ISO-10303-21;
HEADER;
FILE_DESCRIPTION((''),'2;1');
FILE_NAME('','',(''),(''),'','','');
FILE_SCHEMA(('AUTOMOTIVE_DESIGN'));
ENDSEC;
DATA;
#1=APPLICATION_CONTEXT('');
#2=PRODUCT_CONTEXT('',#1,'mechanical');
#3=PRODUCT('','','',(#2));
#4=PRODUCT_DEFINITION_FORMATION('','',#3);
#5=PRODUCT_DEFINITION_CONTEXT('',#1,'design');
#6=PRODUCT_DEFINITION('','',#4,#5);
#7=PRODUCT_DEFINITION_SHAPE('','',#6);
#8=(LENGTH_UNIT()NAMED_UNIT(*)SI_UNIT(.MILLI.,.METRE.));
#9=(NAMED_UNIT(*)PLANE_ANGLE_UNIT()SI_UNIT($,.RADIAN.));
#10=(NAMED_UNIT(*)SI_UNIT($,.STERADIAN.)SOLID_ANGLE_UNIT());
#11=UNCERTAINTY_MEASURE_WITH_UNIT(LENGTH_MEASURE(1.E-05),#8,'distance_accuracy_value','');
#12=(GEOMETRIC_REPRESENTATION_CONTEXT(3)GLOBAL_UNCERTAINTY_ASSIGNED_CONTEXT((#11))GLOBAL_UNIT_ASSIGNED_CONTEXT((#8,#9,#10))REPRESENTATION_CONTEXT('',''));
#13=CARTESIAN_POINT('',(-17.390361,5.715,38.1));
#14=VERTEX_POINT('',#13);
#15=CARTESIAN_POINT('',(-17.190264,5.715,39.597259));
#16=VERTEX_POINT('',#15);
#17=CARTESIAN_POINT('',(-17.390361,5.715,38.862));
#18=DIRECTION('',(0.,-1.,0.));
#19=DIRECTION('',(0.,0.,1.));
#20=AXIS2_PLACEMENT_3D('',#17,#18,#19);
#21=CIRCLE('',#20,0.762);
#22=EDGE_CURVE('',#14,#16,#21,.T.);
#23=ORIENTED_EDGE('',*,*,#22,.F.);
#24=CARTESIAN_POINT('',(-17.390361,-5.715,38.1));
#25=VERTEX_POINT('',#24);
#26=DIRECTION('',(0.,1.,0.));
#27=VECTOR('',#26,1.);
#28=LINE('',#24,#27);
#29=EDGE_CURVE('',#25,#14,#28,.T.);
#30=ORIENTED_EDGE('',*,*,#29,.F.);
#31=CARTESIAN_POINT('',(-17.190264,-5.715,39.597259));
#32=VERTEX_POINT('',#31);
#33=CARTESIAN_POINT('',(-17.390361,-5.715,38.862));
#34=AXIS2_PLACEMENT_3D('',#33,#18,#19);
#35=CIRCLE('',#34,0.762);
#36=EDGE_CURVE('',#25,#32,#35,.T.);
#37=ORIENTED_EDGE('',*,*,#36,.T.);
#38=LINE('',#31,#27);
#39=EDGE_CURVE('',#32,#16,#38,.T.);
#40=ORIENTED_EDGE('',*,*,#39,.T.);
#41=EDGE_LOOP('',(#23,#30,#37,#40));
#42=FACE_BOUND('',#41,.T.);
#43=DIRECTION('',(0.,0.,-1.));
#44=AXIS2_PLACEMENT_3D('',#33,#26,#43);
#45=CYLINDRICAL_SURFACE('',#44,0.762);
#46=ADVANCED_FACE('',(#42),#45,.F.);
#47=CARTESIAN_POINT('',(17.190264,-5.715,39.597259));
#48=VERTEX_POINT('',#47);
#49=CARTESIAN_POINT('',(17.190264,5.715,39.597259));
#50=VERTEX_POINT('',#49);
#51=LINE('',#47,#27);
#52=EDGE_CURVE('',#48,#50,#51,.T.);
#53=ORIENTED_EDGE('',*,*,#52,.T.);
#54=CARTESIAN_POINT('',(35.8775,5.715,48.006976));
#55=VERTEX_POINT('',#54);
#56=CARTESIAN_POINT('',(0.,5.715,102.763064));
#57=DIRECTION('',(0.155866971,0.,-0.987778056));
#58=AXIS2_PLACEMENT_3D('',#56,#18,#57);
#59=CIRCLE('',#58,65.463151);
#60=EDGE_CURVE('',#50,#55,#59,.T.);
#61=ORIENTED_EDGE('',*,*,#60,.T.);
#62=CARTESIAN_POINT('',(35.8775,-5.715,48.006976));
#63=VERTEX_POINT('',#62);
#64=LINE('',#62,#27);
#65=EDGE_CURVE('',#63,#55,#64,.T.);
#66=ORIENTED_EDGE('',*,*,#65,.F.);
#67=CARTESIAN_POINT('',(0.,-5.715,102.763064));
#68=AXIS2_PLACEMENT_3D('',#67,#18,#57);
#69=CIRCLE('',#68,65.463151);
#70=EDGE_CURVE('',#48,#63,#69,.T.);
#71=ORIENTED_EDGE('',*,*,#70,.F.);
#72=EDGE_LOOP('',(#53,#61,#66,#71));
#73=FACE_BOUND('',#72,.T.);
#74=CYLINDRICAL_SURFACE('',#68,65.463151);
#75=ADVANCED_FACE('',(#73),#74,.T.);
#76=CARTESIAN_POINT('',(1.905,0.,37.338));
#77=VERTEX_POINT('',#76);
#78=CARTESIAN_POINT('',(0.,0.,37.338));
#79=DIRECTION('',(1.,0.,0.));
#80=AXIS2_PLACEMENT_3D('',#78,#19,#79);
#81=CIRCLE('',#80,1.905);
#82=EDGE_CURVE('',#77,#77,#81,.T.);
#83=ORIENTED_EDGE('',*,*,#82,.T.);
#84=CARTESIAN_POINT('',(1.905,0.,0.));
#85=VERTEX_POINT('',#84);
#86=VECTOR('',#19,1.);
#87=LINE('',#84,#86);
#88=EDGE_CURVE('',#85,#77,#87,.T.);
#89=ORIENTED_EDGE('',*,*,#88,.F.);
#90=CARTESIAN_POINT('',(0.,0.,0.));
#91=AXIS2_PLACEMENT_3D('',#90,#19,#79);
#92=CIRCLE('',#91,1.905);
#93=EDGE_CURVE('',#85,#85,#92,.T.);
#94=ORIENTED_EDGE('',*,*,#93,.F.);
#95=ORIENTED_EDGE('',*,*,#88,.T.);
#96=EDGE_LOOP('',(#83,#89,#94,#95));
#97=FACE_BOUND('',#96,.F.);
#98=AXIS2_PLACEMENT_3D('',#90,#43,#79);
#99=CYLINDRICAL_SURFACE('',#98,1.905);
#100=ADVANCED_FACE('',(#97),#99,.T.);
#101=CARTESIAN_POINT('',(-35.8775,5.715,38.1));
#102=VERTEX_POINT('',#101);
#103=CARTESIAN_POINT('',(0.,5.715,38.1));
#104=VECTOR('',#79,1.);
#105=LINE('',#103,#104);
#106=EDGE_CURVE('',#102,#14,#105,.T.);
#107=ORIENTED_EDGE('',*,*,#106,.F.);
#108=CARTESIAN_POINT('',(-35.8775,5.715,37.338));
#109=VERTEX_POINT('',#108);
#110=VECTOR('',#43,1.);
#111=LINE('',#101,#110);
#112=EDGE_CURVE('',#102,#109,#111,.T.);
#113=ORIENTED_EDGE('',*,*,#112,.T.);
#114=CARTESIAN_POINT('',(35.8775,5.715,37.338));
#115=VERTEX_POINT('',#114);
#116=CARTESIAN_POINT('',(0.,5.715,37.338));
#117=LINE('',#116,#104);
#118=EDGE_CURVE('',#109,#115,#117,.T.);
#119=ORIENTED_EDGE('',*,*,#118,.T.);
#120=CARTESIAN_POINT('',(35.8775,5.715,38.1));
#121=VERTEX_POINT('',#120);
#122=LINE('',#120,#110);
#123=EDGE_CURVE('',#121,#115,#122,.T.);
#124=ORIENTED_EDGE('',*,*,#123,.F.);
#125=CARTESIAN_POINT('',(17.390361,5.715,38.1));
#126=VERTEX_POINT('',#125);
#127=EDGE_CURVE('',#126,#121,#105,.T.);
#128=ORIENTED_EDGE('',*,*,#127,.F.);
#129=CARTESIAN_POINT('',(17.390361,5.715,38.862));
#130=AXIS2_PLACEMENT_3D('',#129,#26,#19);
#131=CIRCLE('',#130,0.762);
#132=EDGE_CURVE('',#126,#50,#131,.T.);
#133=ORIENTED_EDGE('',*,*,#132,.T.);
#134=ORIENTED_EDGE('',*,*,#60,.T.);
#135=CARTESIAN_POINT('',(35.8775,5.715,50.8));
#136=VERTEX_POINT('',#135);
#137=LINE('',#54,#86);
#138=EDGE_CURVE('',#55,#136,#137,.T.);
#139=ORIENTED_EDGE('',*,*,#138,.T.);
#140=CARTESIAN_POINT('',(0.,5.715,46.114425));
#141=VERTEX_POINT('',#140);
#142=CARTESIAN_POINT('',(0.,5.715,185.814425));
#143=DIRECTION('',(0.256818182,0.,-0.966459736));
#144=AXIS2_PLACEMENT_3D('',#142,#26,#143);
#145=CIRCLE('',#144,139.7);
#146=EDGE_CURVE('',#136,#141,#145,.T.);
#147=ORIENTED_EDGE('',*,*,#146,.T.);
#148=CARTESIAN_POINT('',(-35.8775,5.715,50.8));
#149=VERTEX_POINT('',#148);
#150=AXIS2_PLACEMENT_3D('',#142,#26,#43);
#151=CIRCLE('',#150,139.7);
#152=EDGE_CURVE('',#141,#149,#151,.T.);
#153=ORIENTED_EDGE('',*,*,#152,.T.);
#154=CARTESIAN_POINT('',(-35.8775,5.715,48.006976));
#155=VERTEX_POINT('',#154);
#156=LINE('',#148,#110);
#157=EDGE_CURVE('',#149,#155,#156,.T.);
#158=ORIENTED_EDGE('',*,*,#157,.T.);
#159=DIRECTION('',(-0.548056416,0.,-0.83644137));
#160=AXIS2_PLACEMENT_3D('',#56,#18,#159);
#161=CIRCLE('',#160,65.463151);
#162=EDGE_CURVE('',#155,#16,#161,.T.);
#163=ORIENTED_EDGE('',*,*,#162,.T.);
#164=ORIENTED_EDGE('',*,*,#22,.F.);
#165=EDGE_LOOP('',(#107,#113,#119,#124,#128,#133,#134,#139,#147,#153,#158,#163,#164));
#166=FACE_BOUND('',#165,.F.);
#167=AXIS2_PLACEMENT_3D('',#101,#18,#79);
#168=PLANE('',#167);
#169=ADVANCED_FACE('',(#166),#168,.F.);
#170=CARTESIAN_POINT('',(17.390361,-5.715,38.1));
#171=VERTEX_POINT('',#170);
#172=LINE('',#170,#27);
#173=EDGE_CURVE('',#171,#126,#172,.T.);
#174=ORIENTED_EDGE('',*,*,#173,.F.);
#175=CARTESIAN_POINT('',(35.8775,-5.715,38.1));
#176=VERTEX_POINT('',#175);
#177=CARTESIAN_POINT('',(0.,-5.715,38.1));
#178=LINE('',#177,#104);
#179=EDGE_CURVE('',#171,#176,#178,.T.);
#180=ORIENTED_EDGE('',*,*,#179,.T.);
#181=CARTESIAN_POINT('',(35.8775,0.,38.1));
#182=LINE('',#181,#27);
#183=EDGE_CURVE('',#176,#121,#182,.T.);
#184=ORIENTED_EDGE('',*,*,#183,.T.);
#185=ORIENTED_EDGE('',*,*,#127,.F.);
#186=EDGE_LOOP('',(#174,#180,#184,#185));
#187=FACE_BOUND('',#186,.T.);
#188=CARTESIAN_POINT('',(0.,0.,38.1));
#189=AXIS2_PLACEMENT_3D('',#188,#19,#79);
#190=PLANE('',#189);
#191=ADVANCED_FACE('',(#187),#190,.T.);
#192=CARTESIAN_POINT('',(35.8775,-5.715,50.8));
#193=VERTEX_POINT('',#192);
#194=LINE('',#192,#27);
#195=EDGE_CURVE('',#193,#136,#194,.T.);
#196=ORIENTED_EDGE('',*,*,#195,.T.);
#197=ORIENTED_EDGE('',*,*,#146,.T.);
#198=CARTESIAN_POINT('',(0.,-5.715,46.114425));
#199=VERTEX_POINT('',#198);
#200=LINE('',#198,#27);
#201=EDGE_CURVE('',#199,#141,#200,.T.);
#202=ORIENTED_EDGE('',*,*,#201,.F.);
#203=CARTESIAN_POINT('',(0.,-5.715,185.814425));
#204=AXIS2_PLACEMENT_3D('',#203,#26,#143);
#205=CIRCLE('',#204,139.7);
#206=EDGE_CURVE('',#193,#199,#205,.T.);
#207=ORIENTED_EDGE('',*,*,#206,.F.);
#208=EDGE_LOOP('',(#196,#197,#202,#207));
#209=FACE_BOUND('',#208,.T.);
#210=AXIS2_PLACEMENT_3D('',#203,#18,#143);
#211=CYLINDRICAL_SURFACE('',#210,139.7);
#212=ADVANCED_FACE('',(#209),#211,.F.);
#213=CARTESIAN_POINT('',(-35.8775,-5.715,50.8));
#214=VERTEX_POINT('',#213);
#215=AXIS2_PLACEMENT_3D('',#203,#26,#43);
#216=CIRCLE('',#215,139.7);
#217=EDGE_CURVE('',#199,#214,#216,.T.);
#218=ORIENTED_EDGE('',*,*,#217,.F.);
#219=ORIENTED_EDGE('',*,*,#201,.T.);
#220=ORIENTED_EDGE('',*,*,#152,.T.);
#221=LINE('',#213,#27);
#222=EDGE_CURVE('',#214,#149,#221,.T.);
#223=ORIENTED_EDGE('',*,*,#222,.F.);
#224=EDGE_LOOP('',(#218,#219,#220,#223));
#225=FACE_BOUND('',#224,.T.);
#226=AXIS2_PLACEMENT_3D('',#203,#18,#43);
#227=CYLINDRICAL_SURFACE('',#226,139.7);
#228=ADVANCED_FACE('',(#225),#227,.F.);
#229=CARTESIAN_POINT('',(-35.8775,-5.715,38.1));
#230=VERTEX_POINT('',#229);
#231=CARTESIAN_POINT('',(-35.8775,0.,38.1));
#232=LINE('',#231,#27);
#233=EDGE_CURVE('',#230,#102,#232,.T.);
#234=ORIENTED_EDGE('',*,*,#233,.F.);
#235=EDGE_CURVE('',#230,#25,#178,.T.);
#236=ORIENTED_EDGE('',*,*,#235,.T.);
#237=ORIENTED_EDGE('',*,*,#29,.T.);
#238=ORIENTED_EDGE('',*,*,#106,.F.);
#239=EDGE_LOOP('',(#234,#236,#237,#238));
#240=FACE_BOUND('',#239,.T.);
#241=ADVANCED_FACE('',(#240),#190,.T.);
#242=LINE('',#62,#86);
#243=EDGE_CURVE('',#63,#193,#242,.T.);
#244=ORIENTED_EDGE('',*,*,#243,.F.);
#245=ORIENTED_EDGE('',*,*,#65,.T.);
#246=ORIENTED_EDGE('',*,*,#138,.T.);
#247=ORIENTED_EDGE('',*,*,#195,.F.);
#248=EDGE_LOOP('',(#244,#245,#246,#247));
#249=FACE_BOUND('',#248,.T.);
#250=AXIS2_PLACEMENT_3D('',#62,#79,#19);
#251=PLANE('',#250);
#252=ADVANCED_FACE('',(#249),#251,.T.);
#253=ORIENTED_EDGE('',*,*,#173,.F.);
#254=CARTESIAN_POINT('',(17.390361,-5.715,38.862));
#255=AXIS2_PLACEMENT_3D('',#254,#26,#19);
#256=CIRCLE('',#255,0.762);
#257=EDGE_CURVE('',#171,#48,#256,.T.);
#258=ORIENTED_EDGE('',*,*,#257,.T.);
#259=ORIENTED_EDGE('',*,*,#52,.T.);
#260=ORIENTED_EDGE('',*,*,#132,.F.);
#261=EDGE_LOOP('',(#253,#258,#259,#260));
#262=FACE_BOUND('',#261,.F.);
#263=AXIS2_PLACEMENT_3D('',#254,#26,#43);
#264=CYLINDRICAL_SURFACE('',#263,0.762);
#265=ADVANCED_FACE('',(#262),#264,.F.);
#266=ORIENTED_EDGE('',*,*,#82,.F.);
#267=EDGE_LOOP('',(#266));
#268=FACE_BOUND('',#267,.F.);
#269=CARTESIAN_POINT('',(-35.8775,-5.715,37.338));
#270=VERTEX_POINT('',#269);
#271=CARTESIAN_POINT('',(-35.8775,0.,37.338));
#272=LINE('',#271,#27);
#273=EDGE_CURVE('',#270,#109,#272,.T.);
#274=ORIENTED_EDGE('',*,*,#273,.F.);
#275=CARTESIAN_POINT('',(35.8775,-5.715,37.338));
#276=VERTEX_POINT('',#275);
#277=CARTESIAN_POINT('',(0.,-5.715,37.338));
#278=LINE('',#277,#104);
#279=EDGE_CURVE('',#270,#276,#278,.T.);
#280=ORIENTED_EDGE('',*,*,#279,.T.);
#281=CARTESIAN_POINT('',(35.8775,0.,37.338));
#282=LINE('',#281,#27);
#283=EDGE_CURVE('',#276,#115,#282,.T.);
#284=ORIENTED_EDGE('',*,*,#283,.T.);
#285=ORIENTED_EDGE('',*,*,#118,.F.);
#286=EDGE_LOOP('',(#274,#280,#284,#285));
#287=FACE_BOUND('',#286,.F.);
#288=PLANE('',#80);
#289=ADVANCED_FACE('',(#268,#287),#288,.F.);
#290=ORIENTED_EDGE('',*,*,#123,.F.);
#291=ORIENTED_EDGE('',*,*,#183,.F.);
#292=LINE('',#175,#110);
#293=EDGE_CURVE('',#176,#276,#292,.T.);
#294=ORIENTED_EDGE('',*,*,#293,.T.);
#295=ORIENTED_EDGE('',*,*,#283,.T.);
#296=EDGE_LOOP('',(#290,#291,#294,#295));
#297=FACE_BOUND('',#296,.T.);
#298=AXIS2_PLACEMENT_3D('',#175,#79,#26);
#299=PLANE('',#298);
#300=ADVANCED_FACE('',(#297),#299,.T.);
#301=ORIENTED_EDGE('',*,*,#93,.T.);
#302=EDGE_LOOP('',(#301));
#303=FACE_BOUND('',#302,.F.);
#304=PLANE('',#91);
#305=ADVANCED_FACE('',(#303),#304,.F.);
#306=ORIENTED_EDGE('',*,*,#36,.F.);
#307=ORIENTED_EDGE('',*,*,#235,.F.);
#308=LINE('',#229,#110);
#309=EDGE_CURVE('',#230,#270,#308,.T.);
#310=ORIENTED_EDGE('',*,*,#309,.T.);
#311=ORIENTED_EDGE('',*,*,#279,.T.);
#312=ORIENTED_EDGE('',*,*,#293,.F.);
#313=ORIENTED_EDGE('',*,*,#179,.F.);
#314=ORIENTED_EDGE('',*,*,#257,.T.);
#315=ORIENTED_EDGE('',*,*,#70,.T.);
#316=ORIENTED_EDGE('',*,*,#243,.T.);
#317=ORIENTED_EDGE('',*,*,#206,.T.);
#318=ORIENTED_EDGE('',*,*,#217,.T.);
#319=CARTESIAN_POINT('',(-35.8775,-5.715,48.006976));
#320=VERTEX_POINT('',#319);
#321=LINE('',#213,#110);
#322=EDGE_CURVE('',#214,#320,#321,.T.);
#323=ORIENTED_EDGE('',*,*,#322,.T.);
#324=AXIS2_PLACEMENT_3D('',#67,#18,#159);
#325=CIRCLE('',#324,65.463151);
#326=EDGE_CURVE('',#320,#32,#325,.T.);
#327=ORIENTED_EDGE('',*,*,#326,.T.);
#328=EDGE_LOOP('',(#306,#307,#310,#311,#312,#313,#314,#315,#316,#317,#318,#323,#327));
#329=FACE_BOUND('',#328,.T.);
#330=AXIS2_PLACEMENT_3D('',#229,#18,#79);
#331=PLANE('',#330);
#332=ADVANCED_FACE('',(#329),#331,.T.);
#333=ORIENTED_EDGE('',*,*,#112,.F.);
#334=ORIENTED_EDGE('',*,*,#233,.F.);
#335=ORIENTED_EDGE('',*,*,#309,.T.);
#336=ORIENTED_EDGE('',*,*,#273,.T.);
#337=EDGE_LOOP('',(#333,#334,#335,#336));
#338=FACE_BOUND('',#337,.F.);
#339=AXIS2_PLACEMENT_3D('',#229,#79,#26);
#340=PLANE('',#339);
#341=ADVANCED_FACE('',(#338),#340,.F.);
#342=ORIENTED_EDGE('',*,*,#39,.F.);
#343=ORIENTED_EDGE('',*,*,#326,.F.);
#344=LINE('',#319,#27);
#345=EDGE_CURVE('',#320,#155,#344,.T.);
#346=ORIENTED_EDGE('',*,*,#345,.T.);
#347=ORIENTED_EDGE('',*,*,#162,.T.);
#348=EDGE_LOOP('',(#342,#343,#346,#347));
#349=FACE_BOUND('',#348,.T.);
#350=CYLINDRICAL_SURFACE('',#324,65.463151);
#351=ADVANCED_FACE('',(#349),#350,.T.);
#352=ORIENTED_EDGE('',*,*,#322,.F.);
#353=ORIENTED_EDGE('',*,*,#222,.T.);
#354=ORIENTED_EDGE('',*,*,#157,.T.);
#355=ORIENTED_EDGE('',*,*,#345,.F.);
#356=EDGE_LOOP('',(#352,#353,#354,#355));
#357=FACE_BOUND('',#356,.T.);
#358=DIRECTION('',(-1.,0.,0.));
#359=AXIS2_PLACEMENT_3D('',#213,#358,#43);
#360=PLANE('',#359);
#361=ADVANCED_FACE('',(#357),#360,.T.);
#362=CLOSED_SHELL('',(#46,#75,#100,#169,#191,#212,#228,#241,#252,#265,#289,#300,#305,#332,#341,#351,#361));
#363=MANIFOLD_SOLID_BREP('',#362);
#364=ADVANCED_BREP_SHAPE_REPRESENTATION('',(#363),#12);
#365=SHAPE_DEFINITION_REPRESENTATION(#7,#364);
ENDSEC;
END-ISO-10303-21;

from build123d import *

# Parameters (mm, degrees)
F0_R     = 1.905
F1_DEPTH = 38.1
F2_W     = 71.755
F2_H     = 11.43
F2_R     = 1.905
F3_DEPTH = 0.762
F5_DEPTH = 11.43
F6_R     = 0.762


# Not quite as in the source:
# - a feature names something its author has since deleted; it is built from what else it names


with BuildPart() as f1:
    # F0 (on Top) → F1 (new body)
    with BuildSketch(Plane.XY):
        Circle(F0_R)
    extrude(amount=F1_DEPTH)

    # F2 (on face) → F3 (join)
    with BuildSketch(Plane.XY.offset(38.1)):
        Rectangle(F2_W, F2_H)
        Circle(F2_R, mode=Mode.SUBTRACT)
    extrude(amount=-F3_DEPTH)

    # F4 (on face) → F5 (join, through all)
    with BuildSketch(Plane.XZ.offset(5.715)):
        with BuildLine():
            ThreePointArc((0, 46.1144251321), (-18.0910863279, 47.2907715726), (-35.8775, 50.8))
            Line((-35.8775, 50.8), (-35.8775, 48.0069763479))
            ThreePointArc((-35.8775, 48.0069763479), (-23.5669827894, 41.6891623658), (-10.2035430744, 38.1))
            Line((-10.2035430744, 38.1), (0, 38.1))
            Line((0, 38.1), (0, 46.1144251321))
        make_face()
        with BuildLine():
            ThreePointArc((35.8775, 50.8), (18.0910863279, 47.2907715726), (0, 46.1144251321))
            Line((0, 46.1144251321), (0, 38.1))
            Line((0, 38.1), (10.2035430744, 38.1))
            ThreePointArc((10.2035430744, 38.1), (23.5669827894, 41.6891623658), (35.8775, 48.0069763479))
            Line((35.8775, 48.0069763479), (35.8775, 50.8))
        make_face()
    extrude(amount=-F5_DEPTH)

    # F6
    f6_edges = [f1.edges().sort_by_distance(p)[0] for p in [
        (10.203543, 0, 38.1),
        (-10.203543, 0, 38.1),
    ]]
    fillet(f6_edges, radius=F6_R)


solid = f1.part
